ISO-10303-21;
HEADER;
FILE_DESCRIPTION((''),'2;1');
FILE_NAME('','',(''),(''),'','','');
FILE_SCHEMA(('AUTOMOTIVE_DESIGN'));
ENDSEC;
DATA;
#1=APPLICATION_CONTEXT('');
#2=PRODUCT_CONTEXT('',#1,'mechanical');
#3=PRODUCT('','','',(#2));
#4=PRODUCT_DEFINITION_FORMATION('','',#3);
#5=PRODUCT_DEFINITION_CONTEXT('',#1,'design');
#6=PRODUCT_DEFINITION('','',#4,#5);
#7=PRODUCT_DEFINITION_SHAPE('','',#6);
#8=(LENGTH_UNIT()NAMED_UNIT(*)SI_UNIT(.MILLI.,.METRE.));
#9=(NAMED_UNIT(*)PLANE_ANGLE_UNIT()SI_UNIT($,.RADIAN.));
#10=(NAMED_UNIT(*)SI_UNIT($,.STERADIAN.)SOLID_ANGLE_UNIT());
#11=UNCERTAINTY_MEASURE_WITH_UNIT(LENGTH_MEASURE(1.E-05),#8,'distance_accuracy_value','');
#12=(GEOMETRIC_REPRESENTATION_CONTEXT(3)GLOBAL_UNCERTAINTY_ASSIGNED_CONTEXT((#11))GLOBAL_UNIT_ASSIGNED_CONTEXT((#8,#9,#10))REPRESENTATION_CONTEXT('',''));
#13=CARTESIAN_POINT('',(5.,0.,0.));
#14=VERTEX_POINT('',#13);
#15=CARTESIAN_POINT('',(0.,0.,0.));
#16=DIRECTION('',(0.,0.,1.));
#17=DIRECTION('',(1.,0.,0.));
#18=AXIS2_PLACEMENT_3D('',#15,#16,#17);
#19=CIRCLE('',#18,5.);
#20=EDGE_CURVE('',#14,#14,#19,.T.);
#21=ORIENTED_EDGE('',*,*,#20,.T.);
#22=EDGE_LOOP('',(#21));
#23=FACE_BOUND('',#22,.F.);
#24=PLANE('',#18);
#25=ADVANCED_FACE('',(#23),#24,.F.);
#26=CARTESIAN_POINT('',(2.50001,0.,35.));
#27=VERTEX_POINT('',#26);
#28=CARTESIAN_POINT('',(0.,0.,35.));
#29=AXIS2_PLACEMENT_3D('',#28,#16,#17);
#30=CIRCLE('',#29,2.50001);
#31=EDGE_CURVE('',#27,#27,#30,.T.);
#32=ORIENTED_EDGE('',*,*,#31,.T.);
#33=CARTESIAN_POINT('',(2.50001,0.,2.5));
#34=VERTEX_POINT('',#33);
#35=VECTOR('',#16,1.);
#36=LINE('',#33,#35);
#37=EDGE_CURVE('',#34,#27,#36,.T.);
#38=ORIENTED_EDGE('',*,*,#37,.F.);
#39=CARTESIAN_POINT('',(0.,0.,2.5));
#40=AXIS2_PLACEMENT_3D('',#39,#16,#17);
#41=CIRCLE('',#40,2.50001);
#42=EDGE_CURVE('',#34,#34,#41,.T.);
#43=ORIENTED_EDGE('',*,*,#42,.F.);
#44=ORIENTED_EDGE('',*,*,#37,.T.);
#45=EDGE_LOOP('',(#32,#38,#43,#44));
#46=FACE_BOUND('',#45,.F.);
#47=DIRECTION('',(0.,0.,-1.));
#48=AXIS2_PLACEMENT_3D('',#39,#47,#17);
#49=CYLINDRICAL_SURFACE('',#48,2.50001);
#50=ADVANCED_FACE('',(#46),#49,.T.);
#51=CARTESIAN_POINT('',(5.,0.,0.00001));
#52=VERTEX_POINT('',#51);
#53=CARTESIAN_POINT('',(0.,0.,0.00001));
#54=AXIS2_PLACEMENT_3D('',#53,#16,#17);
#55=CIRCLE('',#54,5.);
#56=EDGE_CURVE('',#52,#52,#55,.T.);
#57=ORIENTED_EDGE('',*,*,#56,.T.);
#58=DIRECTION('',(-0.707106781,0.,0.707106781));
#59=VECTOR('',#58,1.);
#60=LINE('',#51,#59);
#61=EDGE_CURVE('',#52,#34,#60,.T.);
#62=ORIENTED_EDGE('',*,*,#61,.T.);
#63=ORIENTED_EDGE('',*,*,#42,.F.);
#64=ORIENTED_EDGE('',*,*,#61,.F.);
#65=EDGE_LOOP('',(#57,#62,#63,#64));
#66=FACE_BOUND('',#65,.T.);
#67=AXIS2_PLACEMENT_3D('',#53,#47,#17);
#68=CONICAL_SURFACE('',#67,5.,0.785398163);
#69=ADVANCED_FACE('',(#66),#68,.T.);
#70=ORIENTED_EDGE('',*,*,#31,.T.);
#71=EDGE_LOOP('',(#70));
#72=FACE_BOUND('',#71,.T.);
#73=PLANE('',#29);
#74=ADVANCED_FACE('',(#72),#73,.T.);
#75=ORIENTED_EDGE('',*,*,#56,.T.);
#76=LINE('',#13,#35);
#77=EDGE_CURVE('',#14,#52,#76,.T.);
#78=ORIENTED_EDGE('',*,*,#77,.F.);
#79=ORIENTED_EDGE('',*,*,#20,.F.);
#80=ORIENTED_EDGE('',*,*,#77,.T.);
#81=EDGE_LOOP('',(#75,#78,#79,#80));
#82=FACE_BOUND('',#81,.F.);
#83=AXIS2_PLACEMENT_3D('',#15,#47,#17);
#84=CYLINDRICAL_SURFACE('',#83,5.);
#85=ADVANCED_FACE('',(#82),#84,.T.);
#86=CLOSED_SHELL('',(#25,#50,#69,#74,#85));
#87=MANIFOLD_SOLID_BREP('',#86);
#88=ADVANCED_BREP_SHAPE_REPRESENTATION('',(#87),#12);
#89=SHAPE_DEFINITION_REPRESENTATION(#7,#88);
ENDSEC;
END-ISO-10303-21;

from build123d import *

# Parameters (mm, degrees)
F0_R     = 5
F1_DEPTH = 2.5
F2_SIZE  = 2.49999
F3_DEPTH = 32.5


# Not quite as in the source:
# - a fillet or chamfer is up to 0.001 mm smaller than in the source, because OpenCascade refuses the exact size


with BuildPart() as f1:
    # F0 (on Top) → F1 (new body)
    with BuildSketch(Plane.XY):
        Circle(F0_R)
    extrude(amount=F1_DEPTH)

    # F2 (size 2.5 in the source; OpenCascade refuses exactly that, so slightly less here)
    f2_edges = [f1.edges().sort_by_distance(p)[0] for p in [
        (-5, 0, 2.5),
    ]]
    chamfer(f2_edges, length=F2_SIZE)

    # F3 (add): a face of the model
    f3_faces = [f1.faces().sort_by_distance(p)[0] for p in [
        (0, 0, 2.5),
    ]]
    extrude(f3_faces, amount=F3_DEPTH)


solid = f1.part
